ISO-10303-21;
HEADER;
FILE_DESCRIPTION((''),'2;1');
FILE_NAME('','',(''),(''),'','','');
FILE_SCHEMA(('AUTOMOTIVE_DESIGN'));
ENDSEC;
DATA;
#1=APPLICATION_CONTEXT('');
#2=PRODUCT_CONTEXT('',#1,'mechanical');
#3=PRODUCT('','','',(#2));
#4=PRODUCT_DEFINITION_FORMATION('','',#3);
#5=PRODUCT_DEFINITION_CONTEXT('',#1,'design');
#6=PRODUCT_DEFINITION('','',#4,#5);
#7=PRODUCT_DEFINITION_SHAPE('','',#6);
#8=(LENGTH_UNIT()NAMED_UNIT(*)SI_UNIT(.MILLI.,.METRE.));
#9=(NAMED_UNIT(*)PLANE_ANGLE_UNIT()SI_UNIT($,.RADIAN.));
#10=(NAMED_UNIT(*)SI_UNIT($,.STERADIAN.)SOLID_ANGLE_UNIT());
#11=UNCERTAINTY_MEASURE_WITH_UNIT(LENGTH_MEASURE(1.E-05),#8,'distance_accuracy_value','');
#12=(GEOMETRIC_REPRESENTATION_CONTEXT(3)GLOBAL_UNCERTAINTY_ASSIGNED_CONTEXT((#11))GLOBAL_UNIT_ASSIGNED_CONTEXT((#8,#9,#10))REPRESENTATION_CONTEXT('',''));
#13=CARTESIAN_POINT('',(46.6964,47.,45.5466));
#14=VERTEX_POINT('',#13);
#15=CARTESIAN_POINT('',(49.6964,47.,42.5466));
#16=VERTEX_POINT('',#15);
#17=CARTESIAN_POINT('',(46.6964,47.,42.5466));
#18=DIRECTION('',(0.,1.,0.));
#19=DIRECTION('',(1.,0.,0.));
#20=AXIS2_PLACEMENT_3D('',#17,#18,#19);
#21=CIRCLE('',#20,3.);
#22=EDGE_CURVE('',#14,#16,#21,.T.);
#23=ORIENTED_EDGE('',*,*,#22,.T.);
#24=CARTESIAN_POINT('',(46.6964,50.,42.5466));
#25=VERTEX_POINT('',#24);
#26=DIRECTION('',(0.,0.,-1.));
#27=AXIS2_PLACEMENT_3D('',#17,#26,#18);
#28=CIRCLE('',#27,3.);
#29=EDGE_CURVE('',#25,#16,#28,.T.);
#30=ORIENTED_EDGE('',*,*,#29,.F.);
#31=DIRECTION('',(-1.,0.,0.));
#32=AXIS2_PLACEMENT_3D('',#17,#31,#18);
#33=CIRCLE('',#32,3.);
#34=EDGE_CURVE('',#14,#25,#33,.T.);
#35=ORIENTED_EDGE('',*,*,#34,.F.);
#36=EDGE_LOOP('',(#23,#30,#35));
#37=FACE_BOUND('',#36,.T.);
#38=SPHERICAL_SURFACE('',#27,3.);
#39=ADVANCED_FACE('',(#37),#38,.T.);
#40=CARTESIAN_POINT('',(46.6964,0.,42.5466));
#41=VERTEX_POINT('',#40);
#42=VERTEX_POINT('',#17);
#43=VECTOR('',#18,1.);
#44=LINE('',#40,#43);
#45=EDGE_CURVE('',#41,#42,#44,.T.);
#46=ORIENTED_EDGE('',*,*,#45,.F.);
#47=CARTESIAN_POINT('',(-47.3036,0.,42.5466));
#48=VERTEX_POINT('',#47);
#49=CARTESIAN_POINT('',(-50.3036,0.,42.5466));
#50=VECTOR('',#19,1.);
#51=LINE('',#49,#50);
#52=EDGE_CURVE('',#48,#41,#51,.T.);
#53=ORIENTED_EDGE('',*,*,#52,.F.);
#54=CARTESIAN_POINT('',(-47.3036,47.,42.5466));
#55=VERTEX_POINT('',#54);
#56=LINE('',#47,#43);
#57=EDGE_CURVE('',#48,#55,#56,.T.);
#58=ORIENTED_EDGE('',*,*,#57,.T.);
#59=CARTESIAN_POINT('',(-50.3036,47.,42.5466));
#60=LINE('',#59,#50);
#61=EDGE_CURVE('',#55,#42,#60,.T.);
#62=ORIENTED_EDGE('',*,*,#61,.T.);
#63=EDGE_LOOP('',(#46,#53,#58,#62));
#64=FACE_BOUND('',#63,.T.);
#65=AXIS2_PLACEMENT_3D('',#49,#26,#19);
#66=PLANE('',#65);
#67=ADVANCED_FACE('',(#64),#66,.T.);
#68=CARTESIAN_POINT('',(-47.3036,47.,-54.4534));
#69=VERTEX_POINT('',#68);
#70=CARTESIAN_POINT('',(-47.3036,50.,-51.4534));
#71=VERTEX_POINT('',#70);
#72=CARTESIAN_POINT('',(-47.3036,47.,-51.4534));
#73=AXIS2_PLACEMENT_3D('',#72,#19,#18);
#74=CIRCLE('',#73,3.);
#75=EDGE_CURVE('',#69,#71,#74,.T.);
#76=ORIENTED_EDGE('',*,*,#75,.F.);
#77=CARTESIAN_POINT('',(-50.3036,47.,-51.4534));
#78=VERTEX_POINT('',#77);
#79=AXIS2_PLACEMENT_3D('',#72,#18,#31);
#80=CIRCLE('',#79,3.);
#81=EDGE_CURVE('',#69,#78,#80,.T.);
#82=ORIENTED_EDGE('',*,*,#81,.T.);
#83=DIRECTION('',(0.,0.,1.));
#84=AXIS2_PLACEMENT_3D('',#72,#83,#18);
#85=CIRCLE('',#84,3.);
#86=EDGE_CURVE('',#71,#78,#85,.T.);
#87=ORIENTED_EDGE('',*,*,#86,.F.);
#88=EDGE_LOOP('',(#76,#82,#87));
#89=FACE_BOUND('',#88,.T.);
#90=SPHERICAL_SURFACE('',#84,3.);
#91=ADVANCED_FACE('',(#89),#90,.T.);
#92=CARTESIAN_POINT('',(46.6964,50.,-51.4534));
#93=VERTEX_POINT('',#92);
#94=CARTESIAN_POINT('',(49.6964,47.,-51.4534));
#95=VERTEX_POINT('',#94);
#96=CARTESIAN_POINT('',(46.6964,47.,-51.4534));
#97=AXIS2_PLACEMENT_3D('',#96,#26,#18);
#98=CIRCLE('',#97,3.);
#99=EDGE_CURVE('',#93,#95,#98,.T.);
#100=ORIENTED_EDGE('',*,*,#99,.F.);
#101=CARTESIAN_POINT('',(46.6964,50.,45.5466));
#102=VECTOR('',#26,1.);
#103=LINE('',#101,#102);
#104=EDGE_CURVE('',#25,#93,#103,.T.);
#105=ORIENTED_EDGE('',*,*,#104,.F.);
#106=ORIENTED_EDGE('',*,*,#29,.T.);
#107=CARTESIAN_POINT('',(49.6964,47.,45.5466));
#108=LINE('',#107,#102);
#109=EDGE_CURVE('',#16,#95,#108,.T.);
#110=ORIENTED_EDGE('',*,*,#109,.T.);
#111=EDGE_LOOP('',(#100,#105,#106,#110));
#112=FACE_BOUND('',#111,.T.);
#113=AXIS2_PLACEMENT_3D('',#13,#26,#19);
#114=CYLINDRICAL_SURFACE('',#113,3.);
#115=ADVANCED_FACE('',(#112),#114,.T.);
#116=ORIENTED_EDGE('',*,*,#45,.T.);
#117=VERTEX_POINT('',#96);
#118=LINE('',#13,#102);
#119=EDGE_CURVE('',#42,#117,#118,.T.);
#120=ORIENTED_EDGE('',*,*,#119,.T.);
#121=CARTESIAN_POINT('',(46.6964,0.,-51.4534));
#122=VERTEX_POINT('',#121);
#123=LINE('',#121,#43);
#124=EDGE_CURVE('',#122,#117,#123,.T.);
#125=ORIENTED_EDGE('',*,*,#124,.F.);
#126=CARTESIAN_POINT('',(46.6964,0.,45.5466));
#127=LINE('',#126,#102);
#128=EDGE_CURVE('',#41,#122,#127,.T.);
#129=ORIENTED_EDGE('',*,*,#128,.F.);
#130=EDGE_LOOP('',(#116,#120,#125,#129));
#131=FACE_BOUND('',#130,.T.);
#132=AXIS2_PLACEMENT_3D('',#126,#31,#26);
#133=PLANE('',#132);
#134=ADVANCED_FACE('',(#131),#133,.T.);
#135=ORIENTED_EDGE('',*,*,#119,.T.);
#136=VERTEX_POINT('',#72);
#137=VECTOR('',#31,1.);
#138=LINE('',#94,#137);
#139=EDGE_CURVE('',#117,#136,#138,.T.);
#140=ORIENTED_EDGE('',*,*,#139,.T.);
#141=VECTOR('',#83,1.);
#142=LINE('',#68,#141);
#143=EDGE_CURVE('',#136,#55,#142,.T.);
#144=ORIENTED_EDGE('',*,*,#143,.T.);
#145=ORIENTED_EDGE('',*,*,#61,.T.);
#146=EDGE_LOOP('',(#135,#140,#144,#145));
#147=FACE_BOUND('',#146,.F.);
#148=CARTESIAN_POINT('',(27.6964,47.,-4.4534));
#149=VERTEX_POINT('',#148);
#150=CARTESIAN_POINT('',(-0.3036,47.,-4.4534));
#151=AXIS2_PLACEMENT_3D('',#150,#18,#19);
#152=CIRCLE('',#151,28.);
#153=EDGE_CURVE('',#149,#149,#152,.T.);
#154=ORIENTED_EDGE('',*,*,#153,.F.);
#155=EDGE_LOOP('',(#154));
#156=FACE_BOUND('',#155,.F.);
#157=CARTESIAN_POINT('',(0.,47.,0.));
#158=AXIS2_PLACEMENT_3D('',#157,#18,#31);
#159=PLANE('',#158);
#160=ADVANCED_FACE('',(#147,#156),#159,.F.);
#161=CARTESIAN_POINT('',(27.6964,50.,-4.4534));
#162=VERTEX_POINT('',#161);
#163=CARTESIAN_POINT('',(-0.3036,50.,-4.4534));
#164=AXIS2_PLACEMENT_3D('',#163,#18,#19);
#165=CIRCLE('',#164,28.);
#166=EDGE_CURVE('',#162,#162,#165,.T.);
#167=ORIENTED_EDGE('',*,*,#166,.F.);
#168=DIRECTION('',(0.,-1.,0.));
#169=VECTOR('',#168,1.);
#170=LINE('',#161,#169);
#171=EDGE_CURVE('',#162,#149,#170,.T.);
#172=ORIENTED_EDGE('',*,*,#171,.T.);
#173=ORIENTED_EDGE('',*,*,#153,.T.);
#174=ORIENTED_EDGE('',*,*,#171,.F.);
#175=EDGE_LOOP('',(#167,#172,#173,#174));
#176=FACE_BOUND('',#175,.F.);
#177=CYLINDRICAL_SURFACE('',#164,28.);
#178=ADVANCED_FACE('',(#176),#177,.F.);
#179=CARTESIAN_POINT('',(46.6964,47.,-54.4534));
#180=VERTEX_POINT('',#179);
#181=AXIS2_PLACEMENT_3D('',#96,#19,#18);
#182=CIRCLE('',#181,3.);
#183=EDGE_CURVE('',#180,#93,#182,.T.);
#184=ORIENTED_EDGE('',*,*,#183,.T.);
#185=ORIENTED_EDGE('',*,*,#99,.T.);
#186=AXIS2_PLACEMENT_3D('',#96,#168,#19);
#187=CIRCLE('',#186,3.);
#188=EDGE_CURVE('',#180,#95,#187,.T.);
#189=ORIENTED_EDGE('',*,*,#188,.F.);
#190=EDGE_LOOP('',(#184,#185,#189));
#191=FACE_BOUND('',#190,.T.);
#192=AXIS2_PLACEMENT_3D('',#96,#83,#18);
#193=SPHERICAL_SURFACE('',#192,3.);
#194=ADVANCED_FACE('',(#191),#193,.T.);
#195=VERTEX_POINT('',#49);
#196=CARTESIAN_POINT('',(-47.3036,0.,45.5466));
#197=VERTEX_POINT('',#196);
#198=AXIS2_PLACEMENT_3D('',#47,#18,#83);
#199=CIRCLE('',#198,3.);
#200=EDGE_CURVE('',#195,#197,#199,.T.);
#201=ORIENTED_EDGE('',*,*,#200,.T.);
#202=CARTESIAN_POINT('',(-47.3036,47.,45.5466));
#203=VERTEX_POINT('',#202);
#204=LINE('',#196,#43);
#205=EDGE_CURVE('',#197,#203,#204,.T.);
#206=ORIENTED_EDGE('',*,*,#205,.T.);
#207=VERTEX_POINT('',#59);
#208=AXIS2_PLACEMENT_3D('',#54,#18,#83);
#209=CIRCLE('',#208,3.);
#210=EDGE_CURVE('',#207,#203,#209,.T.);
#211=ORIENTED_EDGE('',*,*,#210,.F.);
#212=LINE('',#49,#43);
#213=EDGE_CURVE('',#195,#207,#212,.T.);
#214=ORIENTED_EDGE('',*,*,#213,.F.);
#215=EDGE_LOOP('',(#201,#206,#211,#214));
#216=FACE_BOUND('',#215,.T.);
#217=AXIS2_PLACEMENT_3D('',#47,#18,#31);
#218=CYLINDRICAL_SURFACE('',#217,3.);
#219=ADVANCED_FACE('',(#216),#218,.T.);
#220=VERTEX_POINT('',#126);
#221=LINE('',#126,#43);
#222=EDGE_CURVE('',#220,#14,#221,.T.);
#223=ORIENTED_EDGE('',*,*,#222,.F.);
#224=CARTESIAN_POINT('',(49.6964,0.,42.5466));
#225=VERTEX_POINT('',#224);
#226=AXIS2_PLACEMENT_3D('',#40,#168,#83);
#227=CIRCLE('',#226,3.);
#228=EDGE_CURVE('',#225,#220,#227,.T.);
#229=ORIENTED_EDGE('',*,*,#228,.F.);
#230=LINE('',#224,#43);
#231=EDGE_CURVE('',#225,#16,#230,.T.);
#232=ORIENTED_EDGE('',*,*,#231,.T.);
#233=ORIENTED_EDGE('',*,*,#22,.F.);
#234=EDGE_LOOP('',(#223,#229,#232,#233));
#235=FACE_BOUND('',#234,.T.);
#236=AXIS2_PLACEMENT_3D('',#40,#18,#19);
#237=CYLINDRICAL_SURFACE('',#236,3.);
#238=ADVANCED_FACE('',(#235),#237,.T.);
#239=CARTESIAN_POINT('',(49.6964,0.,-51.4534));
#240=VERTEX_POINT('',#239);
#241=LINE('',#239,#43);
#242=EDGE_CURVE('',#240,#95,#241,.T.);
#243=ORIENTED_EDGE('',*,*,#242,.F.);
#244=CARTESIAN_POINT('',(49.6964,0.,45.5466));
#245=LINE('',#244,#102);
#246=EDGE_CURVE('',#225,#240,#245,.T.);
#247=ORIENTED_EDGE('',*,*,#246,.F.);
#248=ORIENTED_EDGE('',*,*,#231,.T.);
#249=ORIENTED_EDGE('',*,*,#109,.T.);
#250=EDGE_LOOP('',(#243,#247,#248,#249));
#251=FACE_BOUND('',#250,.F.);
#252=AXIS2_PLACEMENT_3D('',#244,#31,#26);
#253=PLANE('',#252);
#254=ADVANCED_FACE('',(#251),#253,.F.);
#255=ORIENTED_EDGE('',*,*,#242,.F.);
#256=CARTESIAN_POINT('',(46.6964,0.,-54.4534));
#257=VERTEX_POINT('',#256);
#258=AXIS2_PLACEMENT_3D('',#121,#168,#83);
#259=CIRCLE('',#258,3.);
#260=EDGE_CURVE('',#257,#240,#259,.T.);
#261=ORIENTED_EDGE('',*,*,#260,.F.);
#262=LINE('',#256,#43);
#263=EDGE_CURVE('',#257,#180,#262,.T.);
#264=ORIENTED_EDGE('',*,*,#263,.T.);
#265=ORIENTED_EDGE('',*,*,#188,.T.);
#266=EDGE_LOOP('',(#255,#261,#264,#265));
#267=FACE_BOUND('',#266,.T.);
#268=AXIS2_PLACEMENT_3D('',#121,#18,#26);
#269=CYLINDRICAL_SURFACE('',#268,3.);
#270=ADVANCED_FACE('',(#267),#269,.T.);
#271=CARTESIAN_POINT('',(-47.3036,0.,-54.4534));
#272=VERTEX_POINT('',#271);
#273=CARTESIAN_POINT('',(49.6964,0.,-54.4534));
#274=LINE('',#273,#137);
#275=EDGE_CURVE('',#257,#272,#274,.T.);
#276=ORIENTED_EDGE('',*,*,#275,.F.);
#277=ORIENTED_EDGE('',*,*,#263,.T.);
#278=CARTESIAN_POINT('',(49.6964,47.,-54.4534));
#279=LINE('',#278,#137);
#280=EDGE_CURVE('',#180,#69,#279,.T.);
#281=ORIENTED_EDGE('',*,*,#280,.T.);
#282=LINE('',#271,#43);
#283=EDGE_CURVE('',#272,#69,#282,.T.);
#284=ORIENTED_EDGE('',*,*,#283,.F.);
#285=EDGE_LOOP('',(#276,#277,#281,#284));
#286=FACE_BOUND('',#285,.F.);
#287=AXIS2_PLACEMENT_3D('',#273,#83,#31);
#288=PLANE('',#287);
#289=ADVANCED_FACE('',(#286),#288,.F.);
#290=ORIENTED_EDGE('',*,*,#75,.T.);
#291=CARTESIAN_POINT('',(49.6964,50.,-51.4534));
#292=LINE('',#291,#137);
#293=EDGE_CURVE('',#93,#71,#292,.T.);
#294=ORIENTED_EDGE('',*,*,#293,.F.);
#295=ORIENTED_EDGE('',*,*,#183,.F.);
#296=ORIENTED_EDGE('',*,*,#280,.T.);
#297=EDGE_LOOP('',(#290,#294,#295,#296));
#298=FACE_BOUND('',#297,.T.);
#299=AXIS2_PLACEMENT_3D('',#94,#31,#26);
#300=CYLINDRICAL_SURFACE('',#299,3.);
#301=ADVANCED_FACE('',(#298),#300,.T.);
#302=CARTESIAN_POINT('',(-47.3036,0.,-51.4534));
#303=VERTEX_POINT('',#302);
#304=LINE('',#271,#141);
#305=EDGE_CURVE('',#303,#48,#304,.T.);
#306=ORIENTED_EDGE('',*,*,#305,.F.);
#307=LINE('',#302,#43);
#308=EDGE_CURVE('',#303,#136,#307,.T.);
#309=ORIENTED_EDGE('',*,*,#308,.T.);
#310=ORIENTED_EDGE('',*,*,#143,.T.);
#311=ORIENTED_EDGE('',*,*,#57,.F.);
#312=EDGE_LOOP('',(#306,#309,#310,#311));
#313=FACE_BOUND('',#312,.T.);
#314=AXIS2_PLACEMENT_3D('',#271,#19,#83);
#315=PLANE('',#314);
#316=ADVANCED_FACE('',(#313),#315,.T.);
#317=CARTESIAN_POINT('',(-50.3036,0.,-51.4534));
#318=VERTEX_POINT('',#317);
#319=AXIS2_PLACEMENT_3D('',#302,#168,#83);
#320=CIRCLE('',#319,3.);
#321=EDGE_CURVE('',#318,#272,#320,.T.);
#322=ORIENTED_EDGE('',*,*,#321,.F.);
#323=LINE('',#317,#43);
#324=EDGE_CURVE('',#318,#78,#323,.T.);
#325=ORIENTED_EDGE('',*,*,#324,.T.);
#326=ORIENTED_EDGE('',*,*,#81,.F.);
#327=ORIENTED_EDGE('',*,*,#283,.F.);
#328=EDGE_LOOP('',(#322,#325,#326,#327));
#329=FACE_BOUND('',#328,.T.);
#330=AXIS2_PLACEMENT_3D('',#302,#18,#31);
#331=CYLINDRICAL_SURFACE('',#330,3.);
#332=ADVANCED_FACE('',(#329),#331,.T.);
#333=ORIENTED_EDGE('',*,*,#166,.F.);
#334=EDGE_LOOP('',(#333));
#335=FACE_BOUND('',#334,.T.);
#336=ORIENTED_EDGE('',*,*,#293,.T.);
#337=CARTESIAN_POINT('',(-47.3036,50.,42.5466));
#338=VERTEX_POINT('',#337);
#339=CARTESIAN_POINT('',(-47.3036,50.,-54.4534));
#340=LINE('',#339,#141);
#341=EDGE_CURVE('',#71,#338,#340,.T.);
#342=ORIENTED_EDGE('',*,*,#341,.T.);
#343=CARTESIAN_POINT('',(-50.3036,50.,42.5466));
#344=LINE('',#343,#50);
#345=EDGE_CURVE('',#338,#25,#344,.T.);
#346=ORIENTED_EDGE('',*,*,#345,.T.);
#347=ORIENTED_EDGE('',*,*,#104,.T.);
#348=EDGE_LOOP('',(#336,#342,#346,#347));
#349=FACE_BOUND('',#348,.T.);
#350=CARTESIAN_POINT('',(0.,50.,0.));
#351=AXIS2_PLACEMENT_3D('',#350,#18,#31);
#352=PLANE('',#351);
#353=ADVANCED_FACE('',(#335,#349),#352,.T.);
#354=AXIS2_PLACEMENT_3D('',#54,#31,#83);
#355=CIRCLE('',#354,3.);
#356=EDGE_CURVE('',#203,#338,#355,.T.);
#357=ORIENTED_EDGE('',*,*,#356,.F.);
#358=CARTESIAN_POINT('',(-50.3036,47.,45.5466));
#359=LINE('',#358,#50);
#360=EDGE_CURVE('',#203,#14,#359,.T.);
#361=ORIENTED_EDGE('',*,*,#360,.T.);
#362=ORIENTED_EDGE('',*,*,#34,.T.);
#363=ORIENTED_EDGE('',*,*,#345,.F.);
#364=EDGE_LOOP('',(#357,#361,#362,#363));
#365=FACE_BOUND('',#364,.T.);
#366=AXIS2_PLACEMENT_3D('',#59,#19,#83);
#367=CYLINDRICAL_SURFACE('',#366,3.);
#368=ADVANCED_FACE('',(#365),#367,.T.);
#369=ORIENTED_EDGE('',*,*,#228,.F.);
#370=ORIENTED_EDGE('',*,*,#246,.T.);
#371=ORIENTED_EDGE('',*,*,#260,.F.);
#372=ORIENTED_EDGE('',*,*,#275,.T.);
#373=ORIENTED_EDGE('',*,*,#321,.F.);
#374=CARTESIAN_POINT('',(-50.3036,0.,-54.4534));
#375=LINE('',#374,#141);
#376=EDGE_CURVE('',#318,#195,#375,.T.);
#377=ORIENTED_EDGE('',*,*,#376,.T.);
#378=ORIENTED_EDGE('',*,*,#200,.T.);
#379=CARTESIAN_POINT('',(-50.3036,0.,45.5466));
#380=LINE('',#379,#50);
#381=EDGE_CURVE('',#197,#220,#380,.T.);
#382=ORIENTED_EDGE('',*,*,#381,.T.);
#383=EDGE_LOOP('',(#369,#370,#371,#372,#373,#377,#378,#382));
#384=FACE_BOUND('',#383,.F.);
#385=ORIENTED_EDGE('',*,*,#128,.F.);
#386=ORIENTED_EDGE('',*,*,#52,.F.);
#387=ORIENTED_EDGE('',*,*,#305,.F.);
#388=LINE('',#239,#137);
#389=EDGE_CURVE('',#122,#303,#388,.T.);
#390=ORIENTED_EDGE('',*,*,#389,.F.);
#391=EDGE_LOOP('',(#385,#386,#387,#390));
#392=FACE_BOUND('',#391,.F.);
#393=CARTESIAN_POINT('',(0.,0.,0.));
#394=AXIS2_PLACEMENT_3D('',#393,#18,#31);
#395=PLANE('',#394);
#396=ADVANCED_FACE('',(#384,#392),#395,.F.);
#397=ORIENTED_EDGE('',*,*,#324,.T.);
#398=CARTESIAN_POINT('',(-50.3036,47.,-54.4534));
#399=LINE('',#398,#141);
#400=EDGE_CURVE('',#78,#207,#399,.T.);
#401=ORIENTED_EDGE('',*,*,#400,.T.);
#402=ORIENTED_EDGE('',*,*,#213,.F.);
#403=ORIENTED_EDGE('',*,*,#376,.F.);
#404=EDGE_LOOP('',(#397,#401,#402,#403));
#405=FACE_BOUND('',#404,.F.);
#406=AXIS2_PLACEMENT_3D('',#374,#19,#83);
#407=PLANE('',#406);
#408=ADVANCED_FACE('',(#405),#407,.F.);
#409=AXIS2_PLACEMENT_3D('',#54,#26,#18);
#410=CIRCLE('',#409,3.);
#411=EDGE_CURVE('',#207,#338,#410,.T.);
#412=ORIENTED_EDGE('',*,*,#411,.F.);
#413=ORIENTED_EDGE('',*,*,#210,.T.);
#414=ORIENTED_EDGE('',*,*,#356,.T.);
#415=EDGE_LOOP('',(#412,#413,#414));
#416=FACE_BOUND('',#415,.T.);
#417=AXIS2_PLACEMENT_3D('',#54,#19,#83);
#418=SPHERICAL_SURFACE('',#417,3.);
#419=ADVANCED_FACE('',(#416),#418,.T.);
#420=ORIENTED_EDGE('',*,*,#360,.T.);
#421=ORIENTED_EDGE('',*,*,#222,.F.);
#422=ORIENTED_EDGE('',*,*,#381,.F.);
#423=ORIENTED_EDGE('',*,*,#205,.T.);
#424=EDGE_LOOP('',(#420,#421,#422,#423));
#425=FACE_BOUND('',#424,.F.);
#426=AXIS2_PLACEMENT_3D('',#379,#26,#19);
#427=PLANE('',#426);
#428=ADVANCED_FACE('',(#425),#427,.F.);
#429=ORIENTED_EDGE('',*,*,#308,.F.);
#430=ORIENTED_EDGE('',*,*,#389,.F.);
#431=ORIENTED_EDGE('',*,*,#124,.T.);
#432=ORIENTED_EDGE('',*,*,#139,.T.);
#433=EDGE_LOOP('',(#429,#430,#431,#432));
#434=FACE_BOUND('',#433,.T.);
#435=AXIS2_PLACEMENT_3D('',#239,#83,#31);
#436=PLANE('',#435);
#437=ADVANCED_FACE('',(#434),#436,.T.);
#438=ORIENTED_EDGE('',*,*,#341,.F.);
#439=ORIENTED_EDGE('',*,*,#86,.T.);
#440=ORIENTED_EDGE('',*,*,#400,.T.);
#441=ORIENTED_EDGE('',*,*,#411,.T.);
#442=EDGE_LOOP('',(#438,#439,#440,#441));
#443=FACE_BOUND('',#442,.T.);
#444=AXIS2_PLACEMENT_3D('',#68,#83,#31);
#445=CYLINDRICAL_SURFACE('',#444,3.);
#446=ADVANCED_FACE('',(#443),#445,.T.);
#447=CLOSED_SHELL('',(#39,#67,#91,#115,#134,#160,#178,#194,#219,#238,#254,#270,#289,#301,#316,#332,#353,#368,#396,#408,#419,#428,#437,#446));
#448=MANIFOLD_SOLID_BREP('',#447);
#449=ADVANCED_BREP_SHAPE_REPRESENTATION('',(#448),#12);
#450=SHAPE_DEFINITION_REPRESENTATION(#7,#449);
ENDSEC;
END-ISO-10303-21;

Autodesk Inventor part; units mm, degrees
ref_plane "YZ Plane" through (0, 0, 0) normal (1, 0, 0) x (0, 1, 0)
ref_plane "XZ Plane" through (0, 0, 0) normal (0, 1, 0) x (-1, 0, 0)
ref_plane "XY Plane" through (0, 0, 0) normal (0, 0, 1) x (1, 0, 0)
sketch "Sketch1" plane through (0, 0, 0) normal (0, 1, 0) x (-1, 0, 0)
  line L0 (50.3036, 45.5466) -> (-49.6964, 45.5466)
  line L1 (-49.6964, 45.5466) -> (-49.6964, -54.4534)
  line L2 (-49.6964, -54.4534) -> (50.3036, -54.4534)
  line L3 (50.3036, -54.4534) -> (50.3036, 45.5466)
  point P0 (0, 0)
  dimension "d0" = 100
  dimension "d1" = 100
extrude "Extrusion1" add sketch "Sketch1" along normal blind 50
fillet "Fillet1" radius 3 8 edges at (49.6964, 50, -4.4534) (-0.3036, 50, 45.5466) (49.6964, 25, 45.5466) (-50.3036, 25, 45.5466) (-50.3036, 50, -4.4534) (-0.3036, 50, -54.4534) (49.6964, 25, -54.4534) (-50.3036, 25, -54.4534)
shell "Shell1" thickness 3 removed faces 1 at (14.363, 0, 11.2132)
sketch "Sketch2" plane through (0, 50, 0) normal (0, 1, 0) x (1, 0, 0)
  circle A0 centre (-0.3036, 4.4534) radius 28
  line L0 (-47.3036, -45.5466) -> (46.6964, -45.5466) projected
  line L1 (-50.3036, 51.4534) -> (-50.3036, -42.5466) projected
  point P0 (0, 0)
  dimension "d6" = 56
  dimension "d7" = 50
  dimension "d8" = 50
extrude "Extrusion2" cut sketch "Sketch2" against normal blind 50
properties part number "Top"
